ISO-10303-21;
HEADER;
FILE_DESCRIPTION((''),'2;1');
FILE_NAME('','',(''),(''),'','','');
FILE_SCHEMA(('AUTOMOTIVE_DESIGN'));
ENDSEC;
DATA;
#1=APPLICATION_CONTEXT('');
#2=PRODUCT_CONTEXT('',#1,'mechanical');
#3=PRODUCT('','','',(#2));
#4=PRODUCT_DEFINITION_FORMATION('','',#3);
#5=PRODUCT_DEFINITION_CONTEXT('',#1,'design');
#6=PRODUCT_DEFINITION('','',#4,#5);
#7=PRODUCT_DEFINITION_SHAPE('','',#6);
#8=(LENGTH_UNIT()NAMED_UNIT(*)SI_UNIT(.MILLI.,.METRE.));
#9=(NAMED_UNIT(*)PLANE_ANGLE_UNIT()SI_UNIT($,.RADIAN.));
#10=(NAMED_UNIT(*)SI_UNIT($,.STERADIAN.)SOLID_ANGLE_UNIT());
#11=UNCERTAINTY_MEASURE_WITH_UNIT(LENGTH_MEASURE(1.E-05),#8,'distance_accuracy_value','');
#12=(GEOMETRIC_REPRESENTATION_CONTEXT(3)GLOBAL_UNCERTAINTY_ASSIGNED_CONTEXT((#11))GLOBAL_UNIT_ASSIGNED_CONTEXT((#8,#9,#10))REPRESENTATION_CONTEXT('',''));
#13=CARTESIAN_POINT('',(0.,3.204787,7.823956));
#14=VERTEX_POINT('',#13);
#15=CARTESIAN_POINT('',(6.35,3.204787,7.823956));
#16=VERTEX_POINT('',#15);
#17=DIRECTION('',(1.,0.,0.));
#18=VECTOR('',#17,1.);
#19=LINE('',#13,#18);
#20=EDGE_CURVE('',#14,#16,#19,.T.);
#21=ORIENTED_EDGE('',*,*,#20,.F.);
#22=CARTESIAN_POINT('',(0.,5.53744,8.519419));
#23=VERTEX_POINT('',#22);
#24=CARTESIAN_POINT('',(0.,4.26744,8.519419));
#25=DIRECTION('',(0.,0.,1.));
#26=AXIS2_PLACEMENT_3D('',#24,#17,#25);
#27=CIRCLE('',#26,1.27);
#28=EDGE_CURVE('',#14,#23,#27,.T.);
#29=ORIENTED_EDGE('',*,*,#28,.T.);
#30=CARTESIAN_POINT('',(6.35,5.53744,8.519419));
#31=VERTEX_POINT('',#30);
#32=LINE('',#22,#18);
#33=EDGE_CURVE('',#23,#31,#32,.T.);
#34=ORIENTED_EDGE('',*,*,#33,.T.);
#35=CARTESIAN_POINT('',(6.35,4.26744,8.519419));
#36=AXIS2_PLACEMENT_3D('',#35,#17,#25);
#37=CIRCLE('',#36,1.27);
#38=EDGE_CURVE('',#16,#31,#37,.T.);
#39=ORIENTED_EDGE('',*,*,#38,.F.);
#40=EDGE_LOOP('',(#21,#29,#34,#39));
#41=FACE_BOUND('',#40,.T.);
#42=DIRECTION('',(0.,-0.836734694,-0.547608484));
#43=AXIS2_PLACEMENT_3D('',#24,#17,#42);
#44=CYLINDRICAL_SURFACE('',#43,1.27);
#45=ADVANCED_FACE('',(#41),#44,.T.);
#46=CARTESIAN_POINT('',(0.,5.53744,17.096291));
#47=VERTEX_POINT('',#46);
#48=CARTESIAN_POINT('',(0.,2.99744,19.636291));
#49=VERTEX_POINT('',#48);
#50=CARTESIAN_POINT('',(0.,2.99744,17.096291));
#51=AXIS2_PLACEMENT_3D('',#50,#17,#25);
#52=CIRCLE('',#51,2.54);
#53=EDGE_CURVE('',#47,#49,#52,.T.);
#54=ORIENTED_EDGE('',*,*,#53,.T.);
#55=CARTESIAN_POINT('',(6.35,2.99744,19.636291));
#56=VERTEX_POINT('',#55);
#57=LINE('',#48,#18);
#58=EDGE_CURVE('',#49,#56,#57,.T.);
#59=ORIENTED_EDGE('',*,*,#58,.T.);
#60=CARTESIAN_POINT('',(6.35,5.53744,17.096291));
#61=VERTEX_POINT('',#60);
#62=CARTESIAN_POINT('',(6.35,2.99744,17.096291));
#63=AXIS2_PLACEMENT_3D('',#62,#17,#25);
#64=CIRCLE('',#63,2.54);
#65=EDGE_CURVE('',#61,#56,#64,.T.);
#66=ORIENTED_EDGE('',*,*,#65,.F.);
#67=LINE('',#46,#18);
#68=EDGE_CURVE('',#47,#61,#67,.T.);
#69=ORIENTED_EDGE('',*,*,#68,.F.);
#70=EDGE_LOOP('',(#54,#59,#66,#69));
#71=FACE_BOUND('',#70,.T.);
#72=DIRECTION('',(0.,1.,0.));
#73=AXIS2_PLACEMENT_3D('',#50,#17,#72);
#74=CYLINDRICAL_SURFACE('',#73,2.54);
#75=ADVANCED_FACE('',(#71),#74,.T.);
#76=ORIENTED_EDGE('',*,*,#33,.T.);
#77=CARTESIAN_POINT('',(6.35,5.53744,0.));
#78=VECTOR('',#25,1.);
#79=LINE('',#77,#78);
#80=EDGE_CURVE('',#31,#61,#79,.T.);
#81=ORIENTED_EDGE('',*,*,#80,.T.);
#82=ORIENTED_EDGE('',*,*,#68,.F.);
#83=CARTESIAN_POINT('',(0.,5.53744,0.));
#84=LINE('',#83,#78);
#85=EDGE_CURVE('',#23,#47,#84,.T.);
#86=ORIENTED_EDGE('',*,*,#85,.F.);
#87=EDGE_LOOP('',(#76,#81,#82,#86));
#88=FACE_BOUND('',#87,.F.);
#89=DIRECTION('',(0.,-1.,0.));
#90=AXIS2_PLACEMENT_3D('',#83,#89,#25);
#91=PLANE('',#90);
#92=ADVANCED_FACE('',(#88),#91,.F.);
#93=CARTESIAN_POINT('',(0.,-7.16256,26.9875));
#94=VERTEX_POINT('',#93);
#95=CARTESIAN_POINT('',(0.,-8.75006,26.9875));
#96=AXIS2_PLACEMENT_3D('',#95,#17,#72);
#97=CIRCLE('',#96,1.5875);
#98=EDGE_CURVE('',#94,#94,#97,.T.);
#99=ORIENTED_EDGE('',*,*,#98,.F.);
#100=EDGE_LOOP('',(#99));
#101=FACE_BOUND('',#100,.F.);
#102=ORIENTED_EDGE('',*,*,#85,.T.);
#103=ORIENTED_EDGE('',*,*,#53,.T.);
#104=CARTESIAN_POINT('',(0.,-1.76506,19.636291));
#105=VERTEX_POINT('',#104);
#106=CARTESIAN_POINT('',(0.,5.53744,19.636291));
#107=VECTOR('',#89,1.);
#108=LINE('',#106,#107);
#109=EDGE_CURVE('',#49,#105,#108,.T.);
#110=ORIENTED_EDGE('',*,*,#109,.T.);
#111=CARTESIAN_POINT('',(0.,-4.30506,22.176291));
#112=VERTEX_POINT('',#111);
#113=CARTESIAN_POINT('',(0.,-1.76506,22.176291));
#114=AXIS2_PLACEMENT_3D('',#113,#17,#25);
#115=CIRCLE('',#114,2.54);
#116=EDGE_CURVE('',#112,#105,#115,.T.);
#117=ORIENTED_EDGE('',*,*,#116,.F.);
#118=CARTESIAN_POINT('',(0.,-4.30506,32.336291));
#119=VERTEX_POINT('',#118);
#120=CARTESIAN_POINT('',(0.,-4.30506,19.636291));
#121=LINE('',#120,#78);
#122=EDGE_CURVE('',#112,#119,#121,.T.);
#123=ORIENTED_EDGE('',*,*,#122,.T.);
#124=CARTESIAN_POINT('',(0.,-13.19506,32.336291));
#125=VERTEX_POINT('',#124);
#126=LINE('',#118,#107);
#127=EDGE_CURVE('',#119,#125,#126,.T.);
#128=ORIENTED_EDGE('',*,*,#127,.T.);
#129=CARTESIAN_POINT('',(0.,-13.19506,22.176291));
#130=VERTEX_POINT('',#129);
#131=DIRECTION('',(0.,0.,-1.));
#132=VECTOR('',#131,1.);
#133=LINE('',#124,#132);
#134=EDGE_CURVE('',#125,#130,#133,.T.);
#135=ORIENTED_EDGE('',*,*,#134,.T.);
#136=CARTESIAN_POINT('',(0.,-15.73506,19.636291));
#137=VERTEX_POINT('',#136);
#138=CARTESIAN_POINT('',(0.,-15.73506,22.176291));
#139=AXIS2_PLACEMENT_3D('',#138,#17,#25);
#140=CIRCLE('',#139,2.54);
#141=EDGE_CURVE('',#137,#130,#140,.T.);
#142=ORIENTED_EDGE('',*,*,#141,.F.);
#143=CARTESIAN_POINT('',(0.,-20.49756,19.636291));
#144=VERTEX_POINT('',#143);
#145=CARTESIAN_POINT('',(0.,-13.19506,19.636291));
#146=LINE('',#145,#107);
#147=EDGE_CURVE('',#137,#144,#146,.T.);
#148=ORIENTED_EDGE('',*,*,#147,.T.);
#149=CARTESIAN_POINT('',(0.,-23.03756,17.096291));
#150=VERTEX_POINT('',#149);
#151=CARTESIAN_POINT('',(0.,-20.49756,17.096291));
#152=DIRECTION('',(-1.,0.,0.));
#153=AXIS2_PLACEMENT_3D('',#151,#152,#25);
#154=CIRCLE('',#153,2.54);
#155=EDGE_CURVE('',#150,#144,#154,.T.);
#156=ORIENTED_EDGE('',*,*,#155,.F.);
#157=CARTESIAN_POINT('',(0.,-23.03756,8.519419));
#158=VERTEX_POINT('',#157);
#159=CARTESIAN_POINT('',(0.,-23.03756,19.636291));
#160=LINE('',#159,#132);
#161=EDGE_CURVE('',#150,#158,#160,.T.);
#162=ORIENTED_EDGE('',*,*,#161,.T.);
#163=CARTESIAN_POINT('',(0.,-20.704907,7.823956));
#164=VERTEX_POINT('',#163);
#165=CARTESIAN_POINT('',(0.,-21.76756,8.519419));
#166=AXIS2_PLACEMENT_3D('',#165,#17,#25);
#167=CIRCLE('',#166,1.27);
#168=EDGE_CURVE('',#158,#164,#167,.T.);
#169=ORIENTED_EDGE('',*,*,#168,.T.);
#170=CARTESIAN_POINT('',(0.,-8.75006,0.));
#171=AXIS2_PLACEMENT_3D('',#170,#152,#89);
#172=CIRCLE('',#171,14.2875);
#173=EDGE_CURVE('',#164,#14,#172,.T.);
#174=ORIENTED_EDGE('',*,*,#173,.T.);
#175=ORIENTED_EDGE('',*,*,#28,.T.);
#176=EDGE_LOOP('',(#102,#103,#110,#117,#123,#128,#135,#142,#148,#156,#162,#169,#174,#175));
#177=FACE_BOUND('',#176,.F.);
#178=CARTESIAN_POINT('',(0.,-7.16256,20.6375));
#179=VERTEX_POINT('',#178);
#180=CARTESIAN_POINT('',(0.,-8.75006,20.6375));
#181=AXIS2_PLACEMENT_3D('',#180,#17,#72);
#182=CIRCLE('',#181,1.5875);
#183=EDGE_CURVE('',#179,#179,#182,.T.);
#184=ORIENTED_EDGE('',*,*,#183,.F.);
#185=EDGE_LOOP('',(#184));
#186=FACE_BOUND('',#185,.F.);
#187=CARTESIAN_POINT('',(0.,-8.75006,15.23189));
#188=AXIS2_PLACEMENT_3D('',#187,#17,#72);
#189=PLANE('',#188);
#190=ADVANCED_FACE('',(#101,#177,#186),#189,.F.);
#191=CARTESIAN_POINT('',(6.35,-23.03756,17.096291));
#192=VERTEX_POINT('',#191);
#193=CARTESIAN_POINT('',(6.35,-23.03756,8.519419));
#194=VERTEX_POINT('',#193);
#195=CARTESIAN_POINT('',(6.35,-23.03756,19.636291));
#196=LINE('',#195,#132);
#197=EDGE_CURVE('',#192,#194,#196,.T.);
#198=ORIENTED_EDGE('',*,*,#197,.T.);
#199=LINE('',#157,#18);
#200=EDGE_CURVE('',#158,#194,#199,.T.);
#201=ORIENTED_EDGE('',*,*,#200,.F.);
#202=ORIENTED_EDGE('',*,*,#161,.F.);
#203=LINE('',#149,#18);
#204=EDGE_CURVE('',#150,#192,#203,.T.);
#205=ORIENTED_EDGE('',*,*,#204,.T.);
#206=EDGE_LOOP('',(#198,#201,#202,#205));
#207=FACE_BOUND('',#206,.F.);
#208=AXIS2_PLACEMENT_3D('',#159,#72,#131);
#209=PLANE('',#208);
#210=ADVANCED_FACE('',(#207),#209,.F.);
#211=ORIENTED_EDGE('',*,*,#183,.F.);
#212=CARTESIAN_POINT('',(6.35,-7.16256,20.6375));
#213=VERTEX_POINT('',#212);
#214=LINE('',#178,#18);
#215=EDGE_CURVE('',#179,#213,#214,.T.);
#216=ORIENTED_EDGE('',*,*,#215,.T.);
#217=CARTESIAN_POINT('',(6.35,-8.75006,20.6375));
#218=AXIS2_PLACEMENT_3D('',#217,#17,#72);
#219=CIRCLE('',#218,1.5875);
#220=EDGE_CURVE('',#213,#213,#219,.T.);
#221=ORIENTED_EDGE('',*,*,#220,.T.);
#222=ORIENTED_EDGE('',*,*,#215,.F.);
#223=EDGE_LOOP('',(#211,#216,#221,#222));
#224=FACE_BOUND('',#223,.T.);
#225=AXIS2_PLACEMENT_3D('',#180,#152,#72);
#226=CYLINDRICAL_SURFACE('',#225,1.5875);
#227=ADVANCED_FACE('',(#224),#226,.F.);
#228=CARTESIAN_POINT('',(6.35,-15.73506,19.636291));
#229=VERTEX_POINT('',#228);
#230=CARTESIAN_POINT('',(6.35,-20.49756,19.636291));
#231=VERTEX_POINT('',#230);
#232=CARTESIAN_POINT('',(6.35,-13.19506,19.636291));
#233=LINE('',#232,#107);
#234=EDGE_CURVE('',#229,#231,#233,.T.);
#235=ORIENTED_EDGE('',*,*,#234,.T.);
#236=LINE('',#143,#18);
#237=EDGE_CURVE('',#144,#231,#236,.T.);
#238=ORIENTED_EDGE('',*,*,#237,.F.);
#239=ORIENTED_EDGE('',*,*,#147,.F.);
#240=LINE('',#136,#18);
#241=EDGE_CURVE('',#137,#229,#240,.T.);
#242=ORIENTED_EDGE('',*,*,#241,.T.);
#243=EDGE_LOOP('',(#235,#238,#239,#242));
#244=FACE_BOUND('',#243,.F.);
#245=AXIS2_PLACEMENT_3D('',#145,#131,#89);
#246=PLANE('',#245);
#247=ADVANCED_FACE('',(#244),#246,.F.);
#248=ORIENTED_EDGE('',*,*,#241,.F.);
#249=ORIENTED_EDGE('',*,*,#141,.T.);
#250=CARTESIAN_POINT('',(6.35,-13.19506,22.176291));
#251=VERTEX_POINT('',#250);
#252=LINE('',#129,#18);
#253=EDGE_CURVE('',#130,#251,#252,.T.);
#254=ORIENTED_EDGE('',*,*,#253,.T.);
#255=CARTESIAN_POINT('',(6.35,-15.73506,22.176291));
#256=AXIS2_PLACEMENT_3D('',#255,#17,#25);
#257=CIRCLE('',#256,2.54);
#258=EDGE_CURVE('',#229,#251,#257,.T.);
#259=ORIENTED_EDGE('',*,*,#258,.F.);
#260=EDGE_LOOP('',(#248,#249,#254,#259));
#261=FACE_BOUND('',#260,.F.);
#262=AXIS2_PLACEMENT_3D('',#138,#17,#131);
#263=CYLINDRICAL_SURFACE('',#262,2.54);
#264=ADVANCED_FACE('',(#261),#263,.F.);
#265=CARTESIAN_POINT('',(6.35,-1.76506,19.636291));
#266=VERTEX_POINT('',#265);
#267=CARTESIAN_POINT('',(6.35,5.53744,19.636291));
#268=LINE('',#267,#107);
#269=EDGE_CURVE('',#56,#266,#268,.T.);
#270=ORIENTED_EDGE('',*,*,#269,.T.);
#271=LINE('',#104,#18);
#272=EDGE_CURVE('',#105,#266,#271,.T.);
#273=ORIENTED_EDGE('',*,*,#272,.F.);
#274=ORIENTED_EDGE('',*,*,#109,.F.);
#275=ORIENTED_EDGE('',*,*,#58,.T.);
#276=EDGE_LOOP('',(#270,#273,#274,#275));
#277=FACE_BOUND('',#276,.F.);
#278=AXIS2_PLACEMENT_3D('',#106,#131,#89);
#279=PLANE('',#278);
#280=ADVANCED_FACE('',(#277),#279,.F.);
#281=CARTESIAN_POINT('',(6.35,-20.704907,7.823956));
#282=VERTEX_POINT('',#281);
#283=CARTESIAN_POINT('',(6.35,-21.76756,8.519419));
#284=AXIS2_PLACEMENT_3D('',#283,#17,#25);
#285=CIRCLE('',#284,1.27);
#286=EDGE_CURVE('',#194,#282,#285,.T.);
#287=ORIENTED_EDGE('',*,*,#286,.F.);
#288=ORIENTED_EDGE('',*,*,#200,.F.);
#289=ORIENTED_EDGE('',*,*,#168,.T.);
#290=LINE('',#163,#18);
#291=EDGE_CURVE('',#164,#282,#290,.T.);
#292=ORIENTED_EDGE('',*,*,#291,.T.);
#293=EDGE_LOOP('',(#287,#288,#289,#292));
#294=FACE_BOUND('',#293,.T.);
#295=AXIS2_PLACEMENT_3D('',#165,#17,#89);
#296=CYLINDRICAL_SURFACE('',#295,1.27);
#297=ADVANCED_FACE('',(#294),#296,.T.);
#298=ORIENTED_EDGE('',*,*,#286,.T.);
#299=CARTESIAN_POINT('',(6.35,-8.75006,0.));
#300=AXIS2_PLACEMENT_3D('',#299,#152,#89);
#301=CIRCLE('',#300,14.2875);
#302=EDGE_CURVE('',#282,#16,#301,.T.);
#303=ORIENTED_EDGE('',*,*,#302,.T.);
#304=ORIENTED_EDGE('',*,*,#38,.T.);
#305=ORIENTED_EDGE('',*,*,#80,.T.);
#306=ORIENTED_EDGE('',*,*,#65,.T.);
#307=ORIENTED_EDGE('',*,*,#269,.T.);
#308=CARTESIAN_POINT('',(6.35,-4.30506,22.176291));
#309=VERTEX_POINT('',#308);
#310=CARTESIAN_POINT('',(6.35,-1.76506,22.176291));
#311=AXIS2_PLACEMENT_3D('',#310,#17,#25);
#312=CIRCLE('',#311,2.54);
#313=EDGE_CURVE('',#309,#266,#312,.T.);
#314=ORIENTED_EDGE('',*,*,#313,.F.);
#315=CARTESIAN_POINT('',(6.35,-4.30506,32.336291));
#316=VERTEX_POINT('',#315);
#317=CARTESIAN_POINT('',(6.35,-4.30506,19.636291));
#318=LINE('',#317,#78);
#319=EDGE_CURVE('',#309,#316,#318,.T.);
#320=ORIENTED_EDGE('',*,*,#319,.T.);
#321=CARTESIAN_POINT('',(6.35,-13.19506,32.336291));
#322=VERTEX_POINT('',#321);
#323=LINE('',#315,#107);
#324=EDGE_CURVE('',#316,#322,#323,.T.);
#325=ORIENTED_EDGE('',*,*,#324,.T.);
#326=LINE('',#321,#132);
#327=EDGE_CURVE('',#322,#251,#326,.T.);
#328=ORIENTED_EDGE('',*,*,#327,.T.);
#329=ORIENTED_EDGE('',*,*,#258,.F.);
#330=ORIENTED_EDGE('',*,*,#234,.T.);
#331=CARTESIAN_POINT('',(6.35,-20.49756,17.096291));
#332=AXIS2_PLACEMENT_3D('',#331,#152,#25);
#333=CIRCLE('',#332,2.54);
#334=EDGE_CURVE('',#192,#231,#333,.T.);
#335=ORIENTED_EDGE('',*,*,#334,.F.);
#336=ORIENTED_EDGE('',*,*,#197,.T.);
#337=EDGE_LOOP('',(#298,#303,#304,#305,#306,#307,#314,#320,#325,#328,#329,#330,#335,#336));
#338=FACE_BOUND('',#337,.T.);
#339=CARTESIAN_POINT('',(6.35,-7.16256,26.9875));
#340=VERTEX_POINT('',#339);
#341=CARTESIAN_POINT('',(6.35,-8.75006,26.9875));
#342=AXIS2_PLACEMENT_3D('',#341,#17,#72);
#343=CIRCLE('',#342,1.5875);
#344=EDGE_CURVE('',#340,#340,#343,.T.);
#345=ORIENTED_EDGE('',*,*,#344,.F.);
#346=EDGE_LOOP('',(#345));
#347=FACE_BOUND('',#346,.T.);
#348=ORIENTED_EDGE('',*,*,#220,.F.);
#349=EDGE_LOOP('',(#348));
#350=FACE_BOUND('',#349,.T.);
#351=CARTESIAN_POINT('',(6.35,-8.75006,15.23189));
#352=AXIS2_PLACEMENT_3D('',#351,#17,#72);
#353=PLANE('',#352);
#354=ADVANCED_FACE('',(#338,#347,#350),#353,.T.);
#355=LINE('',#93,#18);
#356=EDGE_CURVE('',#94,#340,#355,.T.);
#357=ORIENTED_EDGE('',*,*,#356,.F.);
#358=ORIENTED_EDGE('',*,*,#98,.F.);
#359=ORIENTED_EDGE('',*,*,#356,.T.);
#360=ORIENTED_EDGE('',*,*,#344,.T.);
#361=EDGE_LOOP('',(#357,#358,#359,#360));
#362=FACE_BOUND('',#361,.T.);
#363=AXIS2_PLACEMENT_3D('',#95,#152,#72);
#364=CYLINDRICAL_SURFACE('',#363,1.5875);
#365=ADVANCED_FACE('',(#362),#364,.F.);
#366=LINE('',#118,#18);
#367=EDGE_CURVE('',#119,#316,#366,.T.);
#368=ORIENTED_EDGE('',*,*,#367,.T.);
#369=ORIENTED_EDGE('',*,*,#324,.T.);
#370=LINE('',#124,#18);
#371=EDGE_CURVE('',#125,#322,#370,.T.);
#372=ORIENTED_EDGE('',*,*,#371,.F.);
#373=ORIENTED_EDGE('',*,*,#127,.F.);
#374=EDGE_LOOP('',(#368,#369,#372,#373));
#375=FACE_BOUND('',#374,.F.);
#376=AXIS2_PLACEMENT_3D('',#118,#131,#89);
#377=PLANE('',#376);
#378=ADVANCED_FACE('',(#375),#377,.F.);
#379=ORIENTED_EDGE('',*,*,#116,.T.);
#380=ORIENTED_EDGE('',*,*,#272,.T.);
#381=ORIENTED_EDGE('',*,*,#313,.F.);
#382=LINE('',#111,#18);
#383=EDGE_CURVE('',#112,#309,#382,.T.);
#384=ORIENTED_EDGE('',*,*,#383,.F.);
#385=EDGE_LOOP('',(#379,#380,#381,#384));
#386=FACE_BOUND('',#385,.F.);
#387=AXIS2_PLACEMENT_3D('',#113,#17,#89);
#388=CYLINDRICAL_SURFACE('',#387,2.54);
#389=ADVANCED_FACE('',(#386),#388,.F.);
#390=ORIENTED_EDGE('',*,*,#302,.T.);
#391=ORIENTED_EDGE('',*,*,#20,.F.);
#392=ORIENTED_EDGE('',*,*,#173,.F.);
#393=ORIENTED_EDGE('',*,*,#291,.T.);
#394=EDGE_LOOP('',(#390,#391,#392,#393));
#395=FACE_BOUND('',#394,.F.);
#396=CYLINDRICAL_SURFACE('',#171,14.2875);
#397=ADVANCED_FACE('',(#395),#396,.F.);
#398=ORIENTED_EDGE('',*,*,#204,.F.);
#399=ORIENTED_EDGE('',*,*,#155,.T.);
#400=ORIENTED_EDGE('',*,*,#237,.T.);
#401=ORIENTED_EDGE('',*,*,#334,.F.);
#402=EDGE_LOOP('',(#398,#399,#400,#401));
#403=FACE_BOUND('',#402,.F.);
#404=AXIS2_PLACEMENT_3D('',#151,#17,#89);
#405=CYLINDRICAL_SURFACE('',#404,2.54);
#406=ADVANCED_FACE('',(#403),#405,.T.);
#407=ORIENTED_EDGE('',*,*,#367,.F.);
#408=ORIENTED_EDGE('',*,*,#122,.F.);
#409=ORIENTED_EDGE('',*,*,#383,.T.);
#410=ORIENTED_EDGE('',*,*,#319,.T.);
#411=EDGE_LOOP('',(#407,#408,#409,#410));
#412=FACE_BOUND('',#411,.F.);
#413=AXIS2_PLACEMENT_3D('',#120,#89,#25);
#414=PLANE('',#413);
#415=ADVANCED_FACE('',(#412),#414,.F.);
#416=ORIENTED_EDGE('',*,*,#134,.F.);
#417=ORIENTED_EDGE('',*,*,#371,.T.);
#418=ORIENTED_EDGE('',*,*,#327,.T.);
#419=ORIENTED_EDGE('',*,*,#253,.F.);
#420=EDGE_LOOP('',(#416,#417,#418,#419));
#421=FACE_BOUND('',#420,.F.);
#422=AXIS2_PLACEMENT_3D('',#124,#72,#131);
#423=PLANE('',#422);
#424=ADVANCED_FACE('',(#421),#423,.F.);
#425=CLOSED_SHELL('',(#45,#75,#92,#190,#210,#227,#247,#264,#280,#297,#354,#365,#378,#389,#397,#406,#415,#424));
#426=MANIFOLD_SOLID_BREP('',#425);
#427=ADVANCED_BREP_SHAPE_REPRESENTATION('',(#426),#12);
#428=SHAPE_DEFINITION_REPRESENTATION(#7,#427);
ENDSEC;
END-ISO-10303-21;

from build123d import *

# Parameters (mm, degrees)
F0_R     = 1.5875
F1_DEPTH = 6.35
F2_R     = 1.27
F3_R     = 2.54


# Not quite as in the source:
# - a feature names something its author has since deleted; it is built from what else it names


with BuildPart() as f1:
    # F0 (on Right) → F1 (new body)
    with BuildSketch(Plane.YZ):
        with BuildLine():
            Line((-23.0375597417, 19.636290542), (-23.0375597417, 0))
            ThreePointArc((-23.0375597417, 0), (-8.7500597417, 14.2875), (5.5374402583, 0))
            Line((5.5374402583, 0), (5.5374402583, 19.636290542))
            Line((5.5374402583, 19.636290542), (-4.3050597417, 19.636290542))
            Line((-4.3050597417, 19.636290542), (-4.3050597417, 32.336290542))
            Line((-4.3050597417, 32.336290542), (-13.1950597417, 32.336290542))
            Line((-13.1950597417, 32.336290542), (-13.1950597417, 19.636290542))
            Line((-13.1950597417, 19.636290542), (-23.0375597417, 19.636290542))
        make_face()
        with Locations((-8.7500597417, 20.6375)):
            Circle(F0_R, mode=Mode.SUBTRACT)
        with Locations((-8.7500597417, 26.9875)):
            Circle(F0_R, mode=Mode.SUBTRACT)
    extrude(amount=F1_DEPTH)

    # F2
    f2_edges = [f1.edges().sort_by_distance(p)[0] for p in [
        (3.175, -23.03756, 0),
        (3.175, 5.53744, 0),
    ]]
    fillet(f2_edges, radius=F2_R)

    # F3
    f3_edges = [f1.edges().sort_by_distance(p)[0] for p in [
        (3.175, -23.03756, 19.636291),
        (3.175, 5.53744, 19.636291),
        (3.175, -4.30506, 19.636291),
        (3.175, -13.19506, 19.636291),
    ]]
    fillet(f3_edges, radius=F3_R)


solid = f1.part
